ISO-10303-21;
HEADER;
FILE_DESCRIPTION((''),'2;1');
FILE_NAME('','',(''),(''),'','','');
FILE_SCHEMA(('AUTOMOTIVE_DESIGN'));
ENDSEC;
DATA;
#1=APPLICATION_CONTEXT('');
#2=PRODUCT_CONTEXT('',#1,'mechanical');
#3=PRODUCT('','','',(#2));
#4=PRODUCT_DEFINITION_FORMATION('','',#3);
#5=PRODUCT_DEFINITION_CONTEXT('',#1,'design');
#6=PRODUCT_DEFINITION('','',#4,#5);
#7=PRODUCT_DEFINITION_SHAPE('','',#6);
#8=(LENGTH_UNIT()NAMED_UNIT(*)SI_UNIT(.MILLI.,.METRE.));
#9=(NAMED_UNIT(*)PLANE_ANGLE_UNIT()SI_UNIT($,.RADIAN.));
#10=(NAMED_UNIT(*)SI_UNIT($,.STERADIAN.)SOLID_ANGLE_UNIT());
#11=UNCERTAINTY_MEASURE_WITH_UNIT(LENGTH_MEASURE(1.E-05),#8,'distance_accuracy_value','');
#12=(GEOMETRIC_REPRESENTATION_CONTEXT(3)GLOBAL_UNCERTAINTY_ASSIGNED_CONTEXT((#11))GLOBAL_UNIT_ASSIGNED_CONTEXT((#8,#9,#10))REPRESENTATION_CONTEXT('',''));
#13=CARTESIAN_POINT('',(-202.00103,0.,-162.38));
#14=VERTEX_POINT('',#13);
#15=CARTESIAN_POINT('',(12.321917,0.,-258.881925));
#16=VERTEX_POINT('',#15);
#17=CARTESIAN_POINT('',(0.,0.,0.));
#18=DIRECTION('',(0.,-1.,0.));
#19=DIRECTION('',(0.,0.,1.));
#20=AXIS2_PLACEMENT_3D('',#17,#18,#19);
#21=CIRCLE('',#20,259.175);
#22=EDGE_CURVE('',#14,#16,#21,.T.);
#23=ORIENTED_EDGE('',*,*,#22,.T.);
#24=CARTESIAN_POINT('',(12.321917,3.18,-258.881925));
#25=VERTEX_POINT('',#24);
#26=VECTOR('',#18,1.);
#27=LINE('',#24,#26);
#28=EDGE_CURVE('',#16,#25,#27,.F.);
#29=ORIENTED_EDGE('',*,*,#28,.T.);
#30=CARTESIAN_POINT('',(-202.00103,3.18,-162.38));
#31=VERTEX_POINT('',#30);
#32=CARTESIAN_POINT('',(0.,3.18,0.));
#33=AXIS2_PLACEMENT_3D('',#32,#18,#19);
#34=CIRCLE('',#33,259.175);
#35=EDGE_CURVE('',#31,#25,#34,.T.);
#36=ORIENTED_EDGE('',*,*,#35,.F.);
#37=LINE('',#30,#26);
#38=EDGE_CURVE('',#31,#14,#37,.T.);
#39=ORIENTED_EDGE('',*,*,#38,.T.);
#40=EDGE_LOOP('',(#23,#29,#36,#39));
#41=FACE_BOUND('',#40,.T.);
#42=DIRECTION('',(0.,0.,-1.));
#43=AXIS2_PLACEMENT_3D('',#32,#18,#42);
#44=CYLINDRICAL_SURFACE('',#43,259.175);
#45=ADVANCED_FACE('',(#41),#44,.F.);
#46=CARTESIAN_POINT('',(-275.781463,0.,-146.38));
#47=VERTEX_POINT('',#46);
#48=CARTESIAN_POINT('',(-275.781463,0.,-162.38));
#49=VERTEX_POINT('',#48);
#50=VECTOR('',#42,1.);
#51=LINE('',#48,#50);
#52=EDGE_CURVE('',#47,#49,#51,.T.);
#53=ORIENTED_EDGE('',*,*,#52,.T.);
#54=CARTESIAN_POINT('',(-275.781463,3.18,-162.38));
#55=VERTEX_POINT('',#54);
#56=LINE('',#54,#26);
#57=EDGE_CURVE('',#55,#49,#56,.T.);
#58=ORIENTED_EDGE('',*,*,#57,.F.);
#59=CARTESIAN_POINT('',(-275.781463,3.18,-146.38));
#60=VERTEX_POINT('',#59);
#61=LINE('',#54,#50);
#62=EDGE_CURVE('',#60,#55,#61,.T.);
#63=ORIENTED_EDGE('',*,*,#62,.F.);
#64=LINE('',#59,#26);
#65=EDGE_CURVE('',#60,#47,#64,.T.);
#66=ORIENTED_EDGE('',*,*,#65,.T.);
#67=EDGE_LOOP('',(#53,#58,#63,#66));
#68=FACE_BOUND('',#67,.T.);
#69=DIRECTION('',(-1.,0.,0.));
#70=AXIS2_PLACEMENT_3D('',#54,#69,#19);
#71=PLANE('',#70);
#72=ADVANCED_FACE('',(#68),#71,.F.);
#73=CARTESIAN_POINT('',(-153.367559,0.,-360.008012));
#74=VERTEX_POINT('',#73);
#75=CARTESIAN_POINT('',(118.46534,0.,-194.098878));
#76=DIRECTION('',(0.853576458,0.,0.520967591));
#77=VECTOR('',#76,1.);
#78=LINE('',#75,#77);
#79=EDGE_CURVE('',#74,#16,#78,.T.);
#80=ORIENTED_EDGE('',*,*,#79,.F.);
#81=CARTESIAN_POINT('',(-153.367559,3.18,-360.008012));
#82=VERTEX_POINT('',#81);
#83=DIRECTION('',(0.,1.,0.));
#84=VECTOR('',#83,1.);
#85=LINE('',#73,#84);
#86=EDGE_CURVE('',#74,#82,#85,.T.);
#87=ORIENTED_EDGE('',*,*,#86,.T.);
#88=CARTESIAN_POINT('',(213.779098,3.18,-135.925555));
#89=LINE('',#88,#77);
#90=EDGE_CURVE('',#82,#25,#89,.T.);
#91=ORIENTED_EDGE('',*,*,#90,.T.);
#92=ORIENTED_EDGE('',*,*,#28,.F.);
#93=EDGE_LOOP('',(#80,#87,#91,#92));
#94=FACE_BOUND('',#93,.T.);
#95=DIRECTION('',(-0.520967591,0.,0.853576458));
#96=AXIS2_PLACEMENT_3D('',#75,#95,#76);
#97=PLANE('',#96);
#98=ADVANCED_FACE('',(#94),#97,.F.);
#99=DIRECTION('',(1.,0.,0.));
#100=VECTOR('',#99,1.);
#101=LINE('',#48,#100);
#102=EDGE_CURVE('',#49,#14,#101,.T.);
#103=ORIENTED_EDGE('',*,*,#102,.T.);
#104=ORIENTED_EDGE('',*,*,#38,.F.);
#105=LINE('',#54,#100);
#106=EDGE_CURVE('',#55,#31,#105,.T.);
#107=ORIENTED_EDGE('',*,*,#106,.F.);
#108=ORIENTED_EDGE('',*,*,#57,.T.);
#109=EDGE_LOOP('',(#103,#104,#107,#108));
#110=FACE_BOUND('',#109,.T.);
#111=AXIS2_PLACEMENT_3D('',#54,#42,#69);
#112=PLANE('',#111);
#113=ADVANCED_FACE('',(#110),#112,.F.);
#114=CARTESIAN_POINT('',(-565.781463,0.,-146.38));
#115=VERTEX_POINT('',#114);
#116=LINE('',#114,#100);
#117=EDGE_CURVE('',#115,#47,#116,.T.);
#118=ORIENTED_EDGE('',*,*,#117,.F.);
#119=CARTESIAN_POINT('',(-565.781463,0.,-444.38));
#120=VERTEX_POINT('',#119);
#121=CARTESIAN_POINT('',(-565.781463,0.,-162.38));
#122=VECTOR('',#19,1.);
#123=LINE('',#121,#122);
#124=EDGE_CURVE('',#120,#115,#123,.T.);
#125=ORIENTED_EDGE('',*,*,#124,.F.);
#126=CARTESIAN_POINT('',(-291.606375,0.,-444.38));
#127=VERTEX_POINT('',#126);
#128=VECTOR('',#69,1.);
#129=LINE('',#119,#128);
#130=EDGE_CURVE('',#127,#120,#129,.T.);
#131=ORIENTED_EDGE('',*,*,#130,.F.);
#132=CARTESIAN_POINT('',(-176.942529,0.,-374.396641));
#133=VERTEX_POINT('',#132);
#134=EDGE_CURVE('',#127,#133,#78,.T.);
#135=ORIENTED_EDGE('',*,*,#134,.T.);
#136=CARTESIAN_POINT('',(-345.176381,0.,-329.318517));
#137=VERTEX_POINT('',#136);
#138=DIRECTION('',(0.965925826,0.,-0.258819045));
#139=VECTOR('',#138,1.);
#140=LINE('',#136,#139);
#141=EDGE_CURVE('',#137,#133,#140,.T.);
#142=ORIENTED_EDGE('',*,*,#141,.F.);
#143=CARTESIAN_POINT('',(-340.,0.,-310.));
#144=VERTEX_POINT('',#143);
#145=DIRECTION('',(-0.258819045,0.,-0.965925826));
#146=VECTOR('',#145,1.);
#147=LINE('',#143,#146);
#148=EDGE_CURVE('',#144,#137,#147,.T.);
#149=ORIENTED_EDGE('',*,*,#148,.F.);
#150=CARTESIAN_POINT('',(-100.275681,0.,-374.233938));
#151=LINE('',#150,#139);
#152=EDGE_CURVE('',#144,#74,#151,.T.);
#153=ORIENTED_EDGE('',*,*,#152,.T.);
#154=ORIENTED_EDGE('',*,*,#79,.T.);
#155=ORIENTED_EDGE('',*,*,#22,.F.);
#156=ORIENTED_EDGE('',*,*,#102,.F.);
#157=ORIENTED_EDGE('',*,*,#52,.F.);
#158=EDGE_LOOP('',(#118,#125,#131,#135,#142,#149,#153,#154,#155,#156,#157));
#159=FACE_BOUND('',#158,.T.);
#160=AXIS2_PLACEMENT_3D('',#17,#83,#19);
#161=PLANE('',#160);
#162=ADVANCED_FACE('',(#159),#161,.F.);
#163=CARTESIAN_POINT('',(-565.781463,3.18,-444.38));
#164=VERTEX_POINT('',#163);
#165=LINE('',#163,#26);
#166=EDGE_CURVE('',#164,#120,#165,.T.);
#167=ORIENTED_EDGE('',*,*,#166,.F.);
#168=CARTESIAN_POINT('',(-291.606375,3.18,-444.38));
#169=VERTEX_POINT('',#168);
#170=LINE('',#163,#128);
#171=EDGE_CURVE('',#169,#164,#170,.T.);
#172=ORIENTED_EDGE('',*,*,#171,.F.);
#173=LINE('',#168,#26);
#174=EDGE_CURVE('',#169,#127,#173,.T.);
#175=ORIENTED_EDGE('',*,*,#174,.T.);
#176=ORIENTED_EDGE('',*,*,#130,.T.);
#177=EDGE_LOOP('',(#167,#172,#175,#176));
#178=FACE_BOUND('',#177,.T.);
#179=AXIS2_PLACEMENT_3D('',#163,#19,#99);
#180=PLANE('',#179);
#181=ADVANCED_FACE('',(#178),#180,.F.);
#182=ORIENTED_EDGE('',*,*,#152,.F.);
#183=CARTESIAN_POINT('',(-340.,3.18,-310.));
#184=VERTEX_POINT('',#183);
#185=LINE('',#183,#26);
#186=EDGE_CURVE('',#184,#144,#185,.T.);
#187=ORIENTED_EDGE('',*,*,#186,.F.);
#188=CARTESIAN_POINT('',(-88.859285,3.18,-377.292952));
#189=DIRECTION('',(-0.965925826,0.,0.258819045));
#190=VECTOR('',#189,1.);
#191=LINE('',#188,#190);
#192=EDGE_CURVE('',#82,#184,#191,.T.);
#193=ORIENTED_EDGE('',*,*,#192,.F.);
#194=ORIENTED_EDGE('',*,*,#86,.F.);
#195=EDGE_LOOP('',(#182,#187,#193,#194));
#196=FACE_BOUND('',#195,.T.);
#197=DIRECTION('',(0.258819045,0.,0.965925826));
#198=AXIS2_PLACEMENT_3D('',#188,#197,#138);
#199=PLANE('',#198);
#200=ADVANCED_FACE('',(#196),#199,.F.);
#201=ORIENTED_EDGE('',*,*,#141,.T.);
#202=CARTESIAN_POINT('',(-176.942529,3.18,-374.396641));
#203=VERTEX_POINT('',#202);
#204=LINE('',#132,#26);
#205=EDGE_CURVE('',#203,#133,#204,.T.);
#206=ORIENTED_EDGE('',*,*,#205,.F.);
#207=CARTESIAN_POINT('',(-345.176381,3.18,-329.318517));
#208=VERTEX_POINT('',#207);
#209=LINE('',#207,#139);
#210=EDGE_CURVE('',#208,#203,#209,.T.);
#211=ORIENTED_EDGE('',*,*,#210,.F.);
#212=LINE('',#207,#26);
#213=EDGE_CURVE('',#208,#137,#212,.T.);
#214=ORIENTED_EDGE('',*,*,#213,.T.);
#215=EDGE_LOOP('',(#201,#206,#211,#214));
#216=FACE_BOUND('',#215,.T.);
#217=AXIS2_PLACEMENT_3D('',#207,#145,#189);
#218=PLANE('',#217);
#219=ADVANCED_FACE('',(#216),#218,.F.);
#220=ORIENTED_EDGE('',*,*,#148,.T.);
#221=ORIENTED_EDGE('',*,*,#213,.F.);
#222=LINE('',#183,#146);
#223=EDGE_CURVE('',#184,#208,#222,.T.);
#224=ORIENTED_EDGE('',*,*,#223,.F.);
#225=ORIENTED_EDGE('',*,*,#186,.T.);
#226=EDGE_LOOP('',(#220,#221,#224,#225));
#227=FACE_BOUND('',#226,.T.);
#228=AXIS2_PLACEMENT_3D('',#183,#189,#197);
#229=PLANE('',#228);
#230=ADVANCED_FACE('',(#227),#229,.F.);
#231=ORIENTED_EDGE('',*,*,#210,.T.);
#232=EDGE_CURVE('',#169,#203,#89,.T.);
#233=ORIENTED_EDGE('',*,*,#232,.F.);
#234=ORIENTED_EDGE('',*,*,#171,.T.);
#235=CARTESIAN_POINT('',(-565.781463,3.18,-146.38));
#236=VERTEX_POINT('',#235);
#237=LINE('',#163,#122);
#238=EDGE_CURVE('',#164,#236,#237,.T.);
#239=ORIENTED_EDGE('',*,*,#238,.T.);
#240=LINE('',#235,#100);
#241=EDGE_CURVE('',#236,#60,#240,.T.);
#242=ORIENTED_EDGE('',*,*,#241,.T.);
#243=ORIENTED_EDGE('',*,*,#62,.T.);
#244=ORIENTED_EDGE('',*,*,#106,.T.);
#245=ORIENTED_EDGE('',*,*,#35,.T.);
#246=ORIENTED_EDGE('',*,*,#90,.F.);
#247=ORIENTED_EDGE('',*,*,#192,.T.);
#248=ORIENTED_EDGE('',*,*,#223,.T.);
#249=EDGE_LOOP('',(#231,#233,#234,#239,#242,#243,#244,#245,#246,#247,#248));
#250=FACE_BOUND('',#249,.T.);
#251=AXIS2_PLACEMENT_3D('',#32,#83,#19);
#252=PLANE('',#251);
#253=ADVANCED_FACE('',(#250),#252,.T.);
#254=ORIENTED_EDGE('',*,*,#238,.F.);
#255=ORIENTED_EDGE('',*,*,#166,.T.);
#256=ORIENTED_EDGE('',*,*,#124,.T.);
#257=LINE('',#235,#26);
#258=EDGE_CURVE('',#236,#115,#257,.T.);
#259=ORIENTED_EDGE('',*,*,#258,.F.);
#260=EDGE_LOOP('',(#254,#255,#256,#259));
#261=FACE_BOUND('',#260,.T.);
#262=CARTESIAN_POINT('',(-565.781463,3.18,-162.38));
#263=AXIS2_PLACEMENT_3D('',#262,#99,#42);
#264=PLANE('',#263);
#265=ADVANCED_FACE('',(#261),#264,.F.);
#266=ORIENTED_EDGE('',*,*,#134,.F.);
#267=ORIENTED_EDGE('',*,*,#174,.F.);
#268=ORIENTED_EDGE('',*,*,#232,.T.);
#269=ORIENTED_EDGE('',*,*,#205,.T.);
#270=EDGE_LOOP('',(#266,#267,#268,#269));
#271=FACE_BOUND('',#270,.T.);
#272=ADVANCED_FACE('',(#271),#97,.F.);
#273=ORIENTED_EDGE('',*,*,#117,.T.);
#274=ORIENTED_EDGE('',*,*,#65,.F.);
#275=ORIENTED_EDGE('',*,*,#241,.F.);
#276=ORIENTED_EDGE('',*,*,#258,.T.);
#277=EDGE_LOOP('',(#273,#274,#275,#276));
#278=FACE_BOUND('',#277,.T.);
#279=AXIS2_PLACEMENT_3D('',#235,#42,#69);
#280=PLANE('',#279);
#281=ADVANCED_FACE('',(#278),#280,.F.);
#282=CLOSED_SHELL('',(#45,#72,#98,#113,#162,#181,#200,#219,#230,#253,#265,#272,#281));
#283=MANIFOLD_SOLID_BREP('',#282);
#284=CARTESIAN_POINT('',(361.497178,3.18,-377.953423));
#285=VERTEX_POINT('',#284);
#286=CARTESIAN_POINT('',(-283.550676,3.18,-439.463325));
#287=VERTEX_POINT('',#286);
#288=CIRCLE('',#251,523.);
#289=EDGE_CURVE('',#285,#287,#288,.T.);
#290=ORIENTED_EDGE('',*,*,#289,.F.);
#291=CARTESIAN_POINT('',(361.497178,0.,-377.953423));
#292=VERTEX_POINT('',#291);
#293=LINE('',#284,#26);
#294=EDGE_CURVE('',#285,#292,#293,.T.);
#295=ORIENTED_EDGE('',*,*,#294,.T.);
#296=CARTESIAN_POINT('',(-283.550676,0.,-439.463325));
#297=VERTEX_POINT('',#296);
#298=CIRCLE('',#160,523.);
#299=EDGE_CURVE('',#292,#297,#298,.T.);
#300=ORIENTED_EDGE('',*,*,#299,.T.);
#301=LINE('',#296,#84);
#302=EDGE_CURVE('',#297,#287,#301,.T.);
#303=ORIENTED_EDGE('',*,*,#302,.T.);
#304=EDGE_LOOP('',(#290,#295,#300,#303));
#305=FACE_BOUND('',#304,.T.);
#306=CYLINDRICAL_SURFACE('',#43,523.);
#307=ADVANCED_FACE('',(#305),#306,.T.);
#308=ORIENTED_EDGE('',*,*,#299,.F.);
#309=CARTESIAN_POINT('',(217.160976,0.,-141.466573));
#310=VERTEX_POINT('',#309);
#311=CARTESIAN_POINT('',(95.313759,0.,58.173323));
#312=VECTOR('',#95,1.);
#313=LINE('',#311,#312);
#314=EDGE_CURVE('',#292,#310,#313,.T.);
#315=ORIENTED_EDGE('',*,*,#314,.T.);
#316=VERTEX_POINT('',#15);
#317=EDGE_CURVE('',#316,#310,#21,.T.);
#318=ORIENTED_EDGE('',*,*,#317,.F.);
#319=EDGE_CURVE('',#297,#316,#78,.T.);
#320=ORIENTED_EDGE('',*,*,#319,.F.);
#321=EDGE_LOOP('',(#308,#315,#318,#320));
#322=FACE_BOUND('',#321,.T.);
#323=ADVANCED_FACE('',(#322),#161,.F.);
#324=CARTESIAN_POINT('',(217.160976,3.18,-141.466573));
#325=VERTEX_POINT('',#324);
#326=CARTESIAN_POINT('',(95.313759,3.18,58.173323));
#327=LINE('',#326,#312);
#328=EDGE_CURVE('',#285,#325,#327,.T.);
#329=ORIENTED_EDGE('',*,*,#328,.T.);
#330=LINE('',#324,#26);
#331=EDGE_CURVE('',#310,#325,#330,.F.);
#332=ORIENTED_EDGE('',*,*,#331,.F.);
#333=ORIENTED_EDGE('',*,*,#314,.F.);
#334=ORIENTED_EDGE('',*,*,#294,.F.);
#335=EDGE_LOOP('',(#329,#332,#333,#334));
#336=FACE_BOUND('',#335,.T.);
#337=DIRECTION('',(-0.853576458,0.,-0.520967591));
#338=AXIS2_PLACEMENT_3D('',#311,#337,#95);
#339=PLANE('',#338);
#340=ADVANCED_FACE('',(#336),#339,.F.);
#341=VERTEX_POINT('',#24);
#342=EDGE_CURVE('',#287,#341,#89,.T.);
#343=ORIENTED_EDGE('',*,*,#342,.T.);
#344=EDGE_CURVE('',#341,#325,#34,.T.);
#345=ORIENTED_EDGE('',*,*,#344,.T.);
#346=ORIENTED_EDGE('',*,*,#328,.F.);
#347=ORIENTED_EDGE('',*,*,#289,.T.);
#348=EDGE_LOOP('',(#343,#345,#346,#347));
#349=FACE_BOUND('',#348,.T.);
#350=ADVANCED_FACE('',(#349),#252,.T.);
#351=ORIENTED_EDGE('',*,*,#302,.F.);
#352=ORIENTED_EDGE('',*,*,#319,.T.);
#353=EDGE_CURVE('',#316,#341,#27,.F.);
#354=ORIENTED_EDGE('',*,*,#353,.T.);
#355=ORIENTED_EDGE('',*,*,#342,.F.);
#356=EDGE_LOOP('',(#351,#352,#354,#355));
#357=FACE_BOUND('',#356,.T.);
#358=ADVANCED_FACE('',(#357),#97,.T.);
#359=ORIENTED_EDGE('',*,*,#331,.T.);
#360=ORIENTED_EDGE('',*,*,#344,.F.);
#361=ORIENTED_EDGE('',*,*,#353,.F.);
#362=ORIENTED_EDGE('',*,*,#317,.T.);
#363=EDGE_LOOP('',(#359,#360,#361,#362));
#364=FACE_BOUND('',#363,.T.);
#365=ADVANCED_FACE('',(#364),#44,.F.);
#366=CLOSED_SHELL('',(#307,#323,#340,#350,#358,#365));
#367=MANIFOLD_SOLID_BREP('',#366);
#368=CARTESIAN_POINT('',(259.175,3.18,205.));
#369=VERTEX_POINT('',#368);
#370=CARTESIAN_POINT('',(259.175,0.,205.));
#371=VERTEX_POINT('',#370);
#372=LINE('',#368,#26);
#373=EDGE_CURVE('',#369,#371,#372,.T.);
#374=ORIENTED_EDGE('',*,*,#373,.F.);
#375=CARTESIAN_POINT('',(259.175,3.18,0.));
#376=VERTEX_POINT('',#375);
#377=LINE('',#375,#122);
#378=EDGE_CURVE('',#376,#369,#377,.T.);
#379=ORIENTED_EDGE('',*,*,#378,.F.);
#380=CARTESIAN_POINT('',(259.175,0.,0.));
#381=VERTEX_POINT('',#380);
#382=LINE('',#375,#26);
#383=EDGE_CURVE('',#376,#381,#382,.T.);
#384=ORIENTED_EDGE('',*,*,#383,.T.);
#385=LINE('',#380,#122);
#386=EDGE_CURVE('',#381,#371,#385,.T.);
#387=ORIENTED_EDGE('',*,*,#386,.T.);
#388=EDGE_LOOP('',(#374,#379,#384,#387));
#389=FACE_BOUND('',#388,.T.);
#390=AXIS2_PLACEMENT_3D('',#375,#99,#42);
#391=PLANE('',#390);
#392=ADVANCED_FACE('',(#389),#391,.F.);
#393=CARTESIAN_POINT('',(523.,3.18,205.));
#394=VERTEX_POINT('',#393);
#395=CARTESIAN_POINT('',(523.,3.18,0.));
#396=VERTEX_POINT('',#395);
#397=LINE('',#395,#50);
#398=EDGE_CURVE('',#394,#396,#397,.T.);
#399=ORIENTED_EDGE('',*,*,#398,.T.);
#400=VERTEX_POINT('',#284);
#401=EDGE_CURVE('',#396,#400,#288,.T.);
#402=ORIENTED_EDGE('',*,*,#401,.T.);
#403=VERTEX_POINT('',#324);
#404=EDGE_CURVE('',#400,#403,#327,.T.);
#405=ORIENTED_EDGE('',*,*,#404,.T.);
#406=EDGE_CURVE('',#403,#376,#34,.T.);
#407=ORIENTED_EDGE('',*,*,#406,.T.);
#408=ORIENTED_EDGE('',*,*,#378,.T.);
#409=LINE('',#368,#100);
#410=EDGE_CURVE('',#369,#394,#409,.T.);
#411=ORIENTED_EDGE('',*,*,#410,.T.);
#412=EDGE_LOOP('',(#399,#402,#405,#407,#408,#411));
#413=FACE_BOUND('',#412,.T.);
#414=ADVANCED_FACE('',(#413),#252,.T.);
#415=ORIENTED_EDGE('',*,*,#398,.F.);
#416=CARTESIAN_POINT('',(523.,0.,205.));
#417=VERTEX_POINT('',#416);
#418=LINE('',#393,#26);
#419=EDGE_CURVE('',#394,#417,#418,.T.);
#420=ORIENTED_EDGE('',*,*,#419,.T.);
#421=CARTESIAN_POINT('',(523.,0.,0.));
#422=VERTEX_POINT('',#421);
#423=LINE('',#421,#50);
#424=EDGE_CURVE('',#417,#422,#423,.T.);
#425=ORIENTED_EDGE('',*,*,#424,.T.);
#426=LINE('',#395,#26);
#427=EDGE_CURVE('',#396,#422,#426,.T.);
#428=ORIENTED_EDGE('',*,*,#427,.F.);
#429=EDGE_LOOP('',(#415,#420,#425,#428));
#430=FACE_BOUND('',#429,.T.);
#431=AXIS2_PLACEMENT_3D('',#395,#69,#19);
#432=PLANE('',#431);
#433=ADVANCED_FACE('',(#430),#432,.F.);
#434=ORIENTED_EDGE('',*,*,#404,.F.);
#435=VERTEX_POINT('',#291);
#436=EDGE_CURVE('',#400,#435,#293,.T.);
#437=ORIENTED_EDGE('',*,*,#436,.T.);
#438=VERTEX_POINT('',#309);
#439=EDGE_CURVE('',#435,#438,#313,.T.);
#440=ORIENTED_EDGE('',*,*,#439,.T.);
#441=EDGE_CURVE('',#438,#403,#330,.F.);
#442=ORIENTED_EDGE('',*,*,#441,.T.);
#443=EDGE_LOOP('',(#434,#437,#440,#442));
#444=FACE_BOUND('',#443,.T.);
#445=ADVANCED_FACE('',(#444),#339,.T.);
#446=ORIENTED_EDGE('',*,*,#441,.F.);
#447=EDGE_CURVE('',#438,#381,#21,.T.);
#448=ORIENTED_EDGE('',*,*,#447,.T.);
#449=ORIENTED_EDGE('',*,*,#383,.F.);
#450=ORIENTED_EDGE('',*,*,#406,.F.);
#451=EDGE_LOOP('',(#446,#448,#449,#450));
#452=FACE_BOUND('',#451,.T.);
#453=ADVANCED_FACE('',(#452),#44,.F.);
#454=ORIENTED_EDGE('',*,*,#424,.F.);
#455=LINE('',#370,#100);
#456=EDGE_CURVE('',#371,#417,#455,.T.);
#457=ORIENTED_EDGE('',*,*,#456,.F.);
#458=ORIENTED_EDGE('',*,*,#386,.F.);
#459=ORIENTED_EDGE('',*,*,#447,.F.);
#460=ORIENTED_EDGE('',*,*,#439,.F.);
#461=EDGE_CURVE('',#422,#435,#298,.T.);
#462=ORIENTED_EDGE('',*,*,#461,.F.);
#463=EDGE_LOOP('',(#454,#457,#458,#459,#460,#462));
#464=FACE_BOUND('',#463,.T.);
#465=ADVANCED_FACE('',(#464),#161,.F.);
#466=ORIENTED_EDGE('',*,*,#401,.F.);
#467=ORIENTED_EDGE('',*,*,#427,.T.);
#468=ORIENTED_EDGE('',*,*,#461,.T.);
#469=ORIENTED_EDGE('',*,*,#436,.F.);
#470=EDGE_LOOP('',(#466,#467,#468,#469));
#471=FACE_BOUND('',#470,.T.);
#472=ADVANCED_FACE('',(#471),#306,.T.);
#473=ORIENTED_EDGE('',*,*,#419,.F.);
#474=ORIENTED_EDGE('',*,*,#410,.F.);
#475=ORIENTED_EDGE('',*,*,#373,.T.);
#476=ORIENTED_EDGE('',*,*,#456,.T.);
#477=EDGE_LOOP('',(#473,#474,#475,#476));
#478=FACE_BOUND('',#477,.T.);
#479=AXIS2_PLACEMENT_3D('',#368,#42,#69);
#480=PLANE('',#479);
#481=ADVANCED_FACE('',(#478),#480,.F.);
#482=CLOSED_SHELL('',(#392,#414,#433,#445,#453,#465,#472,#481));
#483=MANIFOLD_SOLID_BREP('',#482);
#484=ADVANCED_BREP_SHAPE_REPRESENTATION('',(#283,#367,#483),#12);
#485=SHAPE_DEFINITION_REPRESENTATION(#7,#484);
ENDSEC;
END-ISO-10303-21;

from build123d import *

# Parameters (mm, degrees)
BOSS_EXTRUDE1_DEPTH = 3.18
CUT_EXTRUDE1_DEPTH  = 771.485416357
CUT_EXTRUDE2_DEPTH  = 771.485416357


# Read off the part's stored shape, not the designer's step: Split3
with BuildPart() as part:
    # Sketch1 → Boss-Extrude1 (new body)
    with BuildSketch(Plane(origin=(0, 0, 0), x_dir=(1, 0, 0), z_dir=(0, 1, 0))):
        with BuildLine():
            Line((-565.781463482, 444.38), (-275.781463482, 444.38))
            ThreePointArc((-275.781463482, 444.38), (254.259016162, 457.035395457), (523, 0))
            Line((523, 0), (523, -205))
            Line((523, -205), (259.175, -205))
            Line((259.175, -205), (259.175, 0))
            ThreePointArc((259.175, 0), (86.075732957, 244.464003119), (-202.001030257, 162.38))
            Line((-202.001030257, 162.38), (-275.781463482, 162.38))
            Line((-275.781463482, 162.38), (-275.781463482, 146.38))
            Line((-275.781463482, 146.38), (-565.781463482, 146.38))
            Line((-565.781463482, 146.38), (-565.781463482, 162.38))
            Line((-565.781463482, 162.38), (-565.781463482, 444.38))
        make_face()
    extrude(amount=BOSS_EXTRUDE1_DEPTH)


with BuildPart() as body_2:
    # Split2: the piece on the far side of the plane
    add(part.part)
    split(bisect_by=Plane(origin=(95.313758644, 0, 58.173323286), x_dir=(0.5209675909432273, 0, -0.8535764577276076), z_dir=(-0.8535764577276076, 0, -0.5209675909432273)), keep=Keep.BOTTOM)


with BuildPart() as part_1:
    add(part.part)

    # Split2
    split(bisect_by=Plane(origin=(95.313758644, 0, 58.173323286), x_dir=(0.5209675909432273, 0, -0.8535764577276076), z_dir=(-0.8535764577276076, 0, -0.5209675909432273)), keep=Keep.TOP)


with BuildPart() as body_3:
    # Split3: the piece on the far side of the plane
    add(part_1.part)
    split(bisect_by=Plane(origin=(118.465339809, 0, -194.098878463), x_dir=(0.8535764577276066, 0, 0.5209675909432288), z_dir=(0.5209675909432288, 0, -0.8535764577276067)), keep=Keep.BOTTOM)

    # Sketch5 → Cut-Extrude2 (cut, through all)
    with BuildSketch(Plane.XZ):
        Polygon((-340, -310), (-345.176380902, -329.318516526), (-94.035666067, -396.611468252), (-88.859285165, -377.292951727), align=None)
    extrude(amount=-CUT_EXTRUDE2_DEPTH, mode=Mode.SUBTRACT)


with BuildPart() as part_2:
    add(part_1.part)

    # Split3
    split(bisect_by=Plane(origin=(118.465339809, 0, -194.098878463), x_dir=(0.8535764577276066, 0, 0.5209675909432288), z_dir=(0.5209675909432288, 0, -0.8535764577276067)), keep=Keep.TOP)

    # Sketch4 → Cut-Extrude1 (cut, through all)
    with BuildSketch(Plane(origin=(0, 3.18, 0), x_dir=(1, 0, 0), z_dir=(0, 1, 0))):
        with BuildLine():
            Line((-291.606374577, 444.38), (-283.55067597, 439.463325156))
            ThreePointArc((-283.55067597, 439.463325156), (-279.676874229, 441.938735597), (-275.781463482, 444.38))
            Line((-275.781463482, 444.38), (-291.606374577, 444.38))
        make_face()
    extrude(amount=-CUT_EXTRUDE1_DEPTH, mode=Mode.SUBTRACT)


solid = Compound([body_2.part, body_3.part, part_2.part])
